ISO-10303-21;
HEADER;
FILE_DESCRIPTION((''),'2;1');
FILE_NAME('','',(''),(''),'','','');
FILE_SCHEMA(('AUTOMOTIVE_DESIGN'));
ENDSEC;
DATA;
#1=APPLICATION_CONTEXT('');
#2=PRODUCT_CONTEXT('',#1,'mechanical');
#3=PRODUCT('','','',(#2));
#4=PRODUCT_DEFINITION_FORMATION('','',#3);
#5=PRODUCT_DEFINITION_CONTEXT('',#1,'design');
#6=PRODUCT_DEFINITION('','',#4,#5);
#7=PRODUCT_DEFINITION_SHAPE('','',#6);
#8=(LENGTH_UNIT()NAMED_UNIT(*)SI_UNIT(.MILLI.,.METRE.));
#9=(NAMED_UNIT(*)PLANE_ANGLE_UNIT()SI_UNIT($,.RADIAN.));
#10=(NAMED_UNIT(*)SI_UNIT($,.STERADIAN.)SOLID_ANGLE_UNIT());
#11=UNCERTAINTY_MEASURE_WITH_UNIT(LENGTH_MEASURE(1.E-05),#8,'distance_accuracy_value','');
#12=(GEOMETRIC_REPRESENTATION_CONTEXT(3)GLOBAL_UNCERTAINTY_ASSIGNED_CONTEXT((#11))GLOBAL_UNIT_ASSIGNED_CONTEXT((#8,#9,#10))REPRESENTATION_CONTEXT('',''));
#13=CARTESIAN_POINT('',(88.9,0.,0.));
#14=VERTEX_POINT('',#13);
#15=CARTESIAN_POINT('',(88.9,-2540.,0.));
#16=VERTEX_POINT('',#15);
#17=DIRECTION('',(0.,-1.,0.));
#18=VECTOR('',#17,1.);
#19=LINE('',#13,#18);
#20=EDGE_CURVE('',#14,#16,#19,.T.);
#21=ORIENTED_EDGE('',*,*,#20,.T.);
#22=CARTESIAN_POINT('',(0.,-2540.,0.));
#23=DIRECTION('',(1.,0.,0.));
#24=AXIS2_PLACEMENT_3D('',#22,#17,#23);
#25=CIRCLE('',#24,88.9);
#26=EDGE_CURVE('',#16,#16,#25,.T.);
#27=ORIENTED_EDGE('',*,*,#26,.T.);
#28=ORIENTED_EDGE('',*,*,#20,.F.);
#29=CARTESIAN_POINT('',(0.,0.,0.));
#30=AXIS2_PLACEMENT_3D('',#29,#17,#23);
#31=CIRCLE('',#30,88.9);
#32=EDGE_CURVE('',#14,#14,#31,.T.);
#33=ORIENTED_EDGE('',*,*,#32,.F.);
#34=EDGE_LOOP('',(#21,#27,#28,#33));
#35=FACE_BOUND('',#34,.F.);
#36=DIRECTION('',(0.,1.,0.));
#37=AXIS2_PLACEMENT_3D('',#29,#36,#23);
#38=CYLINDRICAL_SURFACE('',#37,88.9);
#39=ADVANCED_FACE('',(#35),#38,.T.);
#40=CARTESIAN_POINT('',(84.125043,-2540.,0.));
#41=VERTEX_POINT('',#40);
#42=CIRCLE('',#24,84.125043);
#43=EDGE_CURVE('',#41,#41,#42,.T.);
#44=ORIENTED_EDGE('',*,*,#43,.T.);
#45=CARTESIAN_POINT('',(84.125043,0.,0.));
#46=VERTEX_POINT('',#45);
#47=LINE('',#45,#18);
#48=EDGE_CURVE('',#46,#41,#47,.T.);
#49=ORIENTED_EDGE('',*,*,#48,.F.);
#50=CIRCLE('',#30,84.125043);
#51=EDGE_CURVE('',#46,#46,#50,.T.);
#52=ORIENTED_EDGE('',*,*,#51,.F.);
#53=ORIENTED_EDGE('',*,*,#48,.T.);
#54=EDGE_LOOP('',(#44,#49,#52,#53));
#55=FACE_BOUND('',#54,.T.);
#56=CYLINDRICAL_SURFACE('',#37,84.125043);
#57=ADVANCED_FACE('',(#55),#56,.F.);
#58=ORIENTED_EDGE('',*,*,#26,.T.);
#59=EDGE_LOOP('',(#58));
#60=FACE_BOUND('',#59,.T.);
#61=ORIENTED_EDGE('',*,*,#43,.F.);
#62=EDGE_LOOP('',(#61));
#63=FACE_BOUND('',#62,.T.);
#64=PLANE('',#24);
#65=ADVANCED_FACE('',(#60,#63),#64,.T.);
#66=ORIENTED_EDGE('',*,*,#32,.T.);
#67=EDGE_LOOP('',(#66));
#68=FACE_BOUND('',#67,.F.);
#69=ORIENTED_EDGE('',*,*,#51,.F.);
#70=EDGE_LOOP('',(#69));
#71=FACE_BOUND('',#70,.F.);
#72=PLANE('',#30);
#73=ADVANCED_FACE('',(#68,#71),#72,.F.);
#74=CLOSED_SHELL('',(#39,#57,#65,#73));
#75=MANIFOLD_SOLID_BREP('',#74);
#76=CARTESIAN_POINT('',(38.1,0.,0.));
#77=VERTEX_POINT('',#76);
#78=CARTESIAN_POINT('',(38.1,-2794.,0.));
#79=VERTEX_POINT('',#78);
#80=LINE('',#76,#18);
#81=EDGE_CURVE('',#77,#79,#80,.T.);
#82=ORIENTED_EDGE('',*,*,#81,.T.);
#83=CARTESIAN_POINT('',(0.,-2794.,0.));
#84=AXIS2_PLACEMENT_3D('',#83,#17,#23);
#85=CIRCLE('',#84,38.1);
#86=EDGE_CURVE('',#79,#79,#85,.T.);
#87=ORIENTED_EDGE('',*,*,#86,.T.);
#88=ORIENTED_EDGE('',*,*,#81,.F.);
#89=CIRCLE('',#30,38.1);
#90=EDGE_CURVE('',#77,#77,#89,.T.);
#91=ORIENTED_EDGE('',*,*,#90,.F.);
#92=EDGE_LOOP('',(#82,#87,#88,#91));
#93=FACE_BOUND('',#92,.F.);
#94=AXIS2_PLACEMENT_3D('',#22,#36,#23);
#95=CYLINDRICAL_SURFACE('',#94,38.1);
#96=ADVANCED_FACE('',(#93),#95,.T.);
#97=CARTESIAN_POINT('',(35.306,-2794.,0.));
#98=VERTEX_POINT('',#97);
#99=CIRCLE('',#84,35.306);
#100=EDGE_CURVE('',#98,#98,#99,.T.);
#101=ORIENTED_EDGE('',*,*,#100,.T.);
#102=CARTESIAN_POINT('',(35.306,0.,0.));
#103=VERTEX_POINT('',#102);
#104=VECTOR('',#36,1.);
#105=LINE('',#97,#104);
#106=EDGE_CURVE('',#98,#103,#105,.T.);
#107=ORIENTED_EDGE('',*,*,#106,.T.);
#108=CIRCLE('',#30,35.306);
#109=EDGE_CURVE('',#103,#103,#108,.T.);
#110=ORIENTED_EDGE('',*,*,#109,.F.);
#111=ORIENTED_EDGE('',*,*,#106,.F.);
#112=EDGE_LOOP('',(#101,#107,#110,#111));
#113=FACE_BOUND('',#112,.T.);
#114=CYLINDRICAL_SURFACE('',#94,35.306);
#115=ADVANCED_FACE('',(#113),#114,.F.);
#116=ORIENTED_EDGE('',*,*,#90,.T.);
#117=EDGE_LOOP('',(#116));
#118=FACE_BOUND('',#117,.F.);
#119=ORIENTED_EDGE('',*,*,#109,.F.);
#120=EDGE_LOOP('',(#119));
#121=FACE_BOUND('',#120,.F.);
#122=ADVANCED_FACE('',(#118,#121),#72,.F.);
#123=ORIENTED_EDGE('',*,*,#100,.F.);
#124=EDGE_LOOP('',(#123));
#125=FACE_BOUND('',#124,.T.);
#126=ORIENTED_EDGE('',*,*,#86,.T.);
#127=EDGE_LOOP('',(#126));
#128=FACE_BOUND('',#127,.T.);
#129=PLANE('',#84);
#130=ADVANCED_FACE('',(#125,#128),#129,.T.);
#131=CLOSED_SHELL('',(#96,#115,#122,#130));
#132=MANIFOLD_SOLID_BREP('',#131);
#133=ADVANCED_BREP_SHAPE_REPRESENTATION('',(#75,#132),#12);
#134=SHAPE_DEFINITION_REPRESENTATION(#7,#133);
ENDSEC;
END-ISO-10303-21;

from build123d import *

# Parameters (mm, degrees)
F0_R     = 88.9
F0_R_2   = 84.1250430216
F1_DEPTH = 2540
F0_R_3   = 38.1
F0_R_4   = 35.306
F3_DEPTH = 254


# Not quite as in the source:
# - the program builds the solid bodies; features that only make, move or delete a surface that nothing else refers to are left out


with BuildPart() as f1:
    # F0 (on Front) → F1 (new body)
    with BuildSketch(Plane.XZ):
        Circle(F0_R)
        Circle(F0_R_2, mode=Mode.SUBTRACT)
    extrude(amount=F1_DEPTH)


with BuildPart() as f1b:
    # F0 (on Front) → F1, piece 2 (new body)
    with BuildSketch(Plane.XZ):
        Circle(F0_R_3)
        Circle(F0_R_4, mode=Mode.SUBTRACT)
    extrude(amount=F1_DEPTH)

    # F3 (add): a face of the model
    f3_faces = [f1b.faces().sort_by_distance(p)[0] for p in [
        (-37.0223692655, -2540, 0),
    ]]
    extrude(f3_faces, amount=F3_DEPTH)


solid = Compound([f1.part, f1b.part])
